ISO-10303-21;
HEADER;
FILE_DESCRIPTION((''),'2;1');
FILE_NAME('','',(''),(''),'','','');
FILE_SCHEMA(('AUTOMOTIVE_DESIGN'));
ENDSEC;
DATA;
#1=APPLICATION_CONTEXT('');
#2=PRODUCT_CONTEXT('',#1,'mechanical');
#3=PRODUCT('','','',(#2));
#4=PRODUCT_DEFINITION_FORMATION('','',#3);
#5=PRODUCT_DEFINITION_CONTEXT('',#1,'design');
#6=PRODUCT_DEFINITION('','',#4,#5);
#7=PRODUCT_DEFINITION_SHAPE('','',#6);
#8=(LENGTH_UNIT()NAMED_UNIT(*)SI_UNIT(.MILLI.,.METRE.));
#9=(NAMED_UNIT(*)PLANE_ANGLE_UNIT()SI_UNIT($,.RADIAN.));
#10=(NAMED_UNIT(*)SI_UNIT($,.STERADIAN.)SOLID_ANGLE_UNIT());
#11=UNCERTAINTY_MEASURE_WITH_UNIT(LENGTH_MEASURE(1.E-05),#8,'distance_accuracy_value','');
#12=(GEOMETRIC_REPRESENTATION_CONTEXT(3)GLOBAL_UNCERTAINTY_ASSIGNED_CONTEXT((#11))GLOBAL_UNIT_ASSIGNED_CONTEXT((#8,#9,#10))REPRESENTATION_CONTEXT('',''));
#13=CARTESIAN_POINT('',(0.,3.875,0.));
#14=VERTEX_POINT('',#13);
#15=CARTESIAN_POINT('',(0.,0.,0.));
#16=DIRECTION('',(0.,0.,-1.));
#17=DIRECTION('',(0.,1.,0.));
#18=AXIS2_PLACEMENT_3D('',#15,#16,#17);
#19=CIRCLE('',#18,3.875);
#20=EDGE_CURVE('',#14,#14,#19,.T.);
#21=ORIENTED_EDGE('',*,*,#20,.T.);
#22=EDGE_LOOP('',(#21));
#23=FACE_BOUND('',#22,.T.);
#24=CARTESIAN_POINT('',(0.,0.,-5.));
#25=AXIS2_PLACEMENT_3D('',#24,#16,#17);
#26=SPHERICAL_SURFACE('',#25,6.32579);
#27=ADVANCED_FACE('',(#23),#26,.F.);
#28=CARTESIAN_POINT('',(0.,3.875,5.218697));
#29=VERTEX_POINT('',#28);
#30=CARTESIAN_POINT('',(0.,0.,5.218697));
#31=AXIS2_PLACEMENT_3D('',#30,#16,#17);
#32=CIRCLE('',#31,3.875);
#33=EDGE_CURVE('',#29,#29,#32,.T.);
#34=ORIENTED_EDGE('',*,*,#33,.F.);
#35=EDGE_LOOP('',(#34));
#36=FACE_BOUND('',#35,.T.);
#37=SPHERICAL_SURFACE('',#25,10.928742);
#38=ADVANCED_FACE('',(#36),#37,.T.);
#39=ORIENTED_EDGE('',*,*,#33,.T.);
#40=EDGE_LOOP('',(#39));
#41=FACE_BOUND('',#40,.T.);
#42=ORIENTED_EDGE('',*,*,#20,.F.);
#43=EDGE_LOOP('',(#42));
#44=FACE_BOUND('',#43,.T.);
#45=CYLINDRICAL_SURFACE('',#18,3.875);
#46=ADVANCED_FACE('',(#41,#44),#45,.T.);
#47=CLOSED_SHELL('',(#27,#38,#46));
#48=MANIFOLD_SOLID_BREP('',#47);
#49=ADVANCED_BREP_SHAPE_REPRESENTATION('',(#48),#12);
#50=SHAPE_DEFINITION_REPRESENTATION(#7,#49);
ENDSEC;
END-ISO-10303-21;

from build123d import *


with BuildPart() as part:
    # Sketch3 → Revolve1 (revolve)
    with BuildSketch(Plane(origin=(0, 0, 0), x_dir=(0, 0, -1), z_dir=(1, 0, 0))):
        with BuildLine():
            ThreePointArc((-1.325790464, 0), (-0.9851724, 2.047763741), (0, 3.875))
            Line((0, 3.875), (-5.218697034, 3.875))
            ThreePointArc((-5.218697034, 3.875), (-5.749764973, 1.96975813), (-5.928741651, 0))
            Line((-5.928741651, 0), (-1.325790464, 0))
        make_face()
    revolve(axis=Axis((0, 0, 0), (0, 0, 1)))


solid = part.part
